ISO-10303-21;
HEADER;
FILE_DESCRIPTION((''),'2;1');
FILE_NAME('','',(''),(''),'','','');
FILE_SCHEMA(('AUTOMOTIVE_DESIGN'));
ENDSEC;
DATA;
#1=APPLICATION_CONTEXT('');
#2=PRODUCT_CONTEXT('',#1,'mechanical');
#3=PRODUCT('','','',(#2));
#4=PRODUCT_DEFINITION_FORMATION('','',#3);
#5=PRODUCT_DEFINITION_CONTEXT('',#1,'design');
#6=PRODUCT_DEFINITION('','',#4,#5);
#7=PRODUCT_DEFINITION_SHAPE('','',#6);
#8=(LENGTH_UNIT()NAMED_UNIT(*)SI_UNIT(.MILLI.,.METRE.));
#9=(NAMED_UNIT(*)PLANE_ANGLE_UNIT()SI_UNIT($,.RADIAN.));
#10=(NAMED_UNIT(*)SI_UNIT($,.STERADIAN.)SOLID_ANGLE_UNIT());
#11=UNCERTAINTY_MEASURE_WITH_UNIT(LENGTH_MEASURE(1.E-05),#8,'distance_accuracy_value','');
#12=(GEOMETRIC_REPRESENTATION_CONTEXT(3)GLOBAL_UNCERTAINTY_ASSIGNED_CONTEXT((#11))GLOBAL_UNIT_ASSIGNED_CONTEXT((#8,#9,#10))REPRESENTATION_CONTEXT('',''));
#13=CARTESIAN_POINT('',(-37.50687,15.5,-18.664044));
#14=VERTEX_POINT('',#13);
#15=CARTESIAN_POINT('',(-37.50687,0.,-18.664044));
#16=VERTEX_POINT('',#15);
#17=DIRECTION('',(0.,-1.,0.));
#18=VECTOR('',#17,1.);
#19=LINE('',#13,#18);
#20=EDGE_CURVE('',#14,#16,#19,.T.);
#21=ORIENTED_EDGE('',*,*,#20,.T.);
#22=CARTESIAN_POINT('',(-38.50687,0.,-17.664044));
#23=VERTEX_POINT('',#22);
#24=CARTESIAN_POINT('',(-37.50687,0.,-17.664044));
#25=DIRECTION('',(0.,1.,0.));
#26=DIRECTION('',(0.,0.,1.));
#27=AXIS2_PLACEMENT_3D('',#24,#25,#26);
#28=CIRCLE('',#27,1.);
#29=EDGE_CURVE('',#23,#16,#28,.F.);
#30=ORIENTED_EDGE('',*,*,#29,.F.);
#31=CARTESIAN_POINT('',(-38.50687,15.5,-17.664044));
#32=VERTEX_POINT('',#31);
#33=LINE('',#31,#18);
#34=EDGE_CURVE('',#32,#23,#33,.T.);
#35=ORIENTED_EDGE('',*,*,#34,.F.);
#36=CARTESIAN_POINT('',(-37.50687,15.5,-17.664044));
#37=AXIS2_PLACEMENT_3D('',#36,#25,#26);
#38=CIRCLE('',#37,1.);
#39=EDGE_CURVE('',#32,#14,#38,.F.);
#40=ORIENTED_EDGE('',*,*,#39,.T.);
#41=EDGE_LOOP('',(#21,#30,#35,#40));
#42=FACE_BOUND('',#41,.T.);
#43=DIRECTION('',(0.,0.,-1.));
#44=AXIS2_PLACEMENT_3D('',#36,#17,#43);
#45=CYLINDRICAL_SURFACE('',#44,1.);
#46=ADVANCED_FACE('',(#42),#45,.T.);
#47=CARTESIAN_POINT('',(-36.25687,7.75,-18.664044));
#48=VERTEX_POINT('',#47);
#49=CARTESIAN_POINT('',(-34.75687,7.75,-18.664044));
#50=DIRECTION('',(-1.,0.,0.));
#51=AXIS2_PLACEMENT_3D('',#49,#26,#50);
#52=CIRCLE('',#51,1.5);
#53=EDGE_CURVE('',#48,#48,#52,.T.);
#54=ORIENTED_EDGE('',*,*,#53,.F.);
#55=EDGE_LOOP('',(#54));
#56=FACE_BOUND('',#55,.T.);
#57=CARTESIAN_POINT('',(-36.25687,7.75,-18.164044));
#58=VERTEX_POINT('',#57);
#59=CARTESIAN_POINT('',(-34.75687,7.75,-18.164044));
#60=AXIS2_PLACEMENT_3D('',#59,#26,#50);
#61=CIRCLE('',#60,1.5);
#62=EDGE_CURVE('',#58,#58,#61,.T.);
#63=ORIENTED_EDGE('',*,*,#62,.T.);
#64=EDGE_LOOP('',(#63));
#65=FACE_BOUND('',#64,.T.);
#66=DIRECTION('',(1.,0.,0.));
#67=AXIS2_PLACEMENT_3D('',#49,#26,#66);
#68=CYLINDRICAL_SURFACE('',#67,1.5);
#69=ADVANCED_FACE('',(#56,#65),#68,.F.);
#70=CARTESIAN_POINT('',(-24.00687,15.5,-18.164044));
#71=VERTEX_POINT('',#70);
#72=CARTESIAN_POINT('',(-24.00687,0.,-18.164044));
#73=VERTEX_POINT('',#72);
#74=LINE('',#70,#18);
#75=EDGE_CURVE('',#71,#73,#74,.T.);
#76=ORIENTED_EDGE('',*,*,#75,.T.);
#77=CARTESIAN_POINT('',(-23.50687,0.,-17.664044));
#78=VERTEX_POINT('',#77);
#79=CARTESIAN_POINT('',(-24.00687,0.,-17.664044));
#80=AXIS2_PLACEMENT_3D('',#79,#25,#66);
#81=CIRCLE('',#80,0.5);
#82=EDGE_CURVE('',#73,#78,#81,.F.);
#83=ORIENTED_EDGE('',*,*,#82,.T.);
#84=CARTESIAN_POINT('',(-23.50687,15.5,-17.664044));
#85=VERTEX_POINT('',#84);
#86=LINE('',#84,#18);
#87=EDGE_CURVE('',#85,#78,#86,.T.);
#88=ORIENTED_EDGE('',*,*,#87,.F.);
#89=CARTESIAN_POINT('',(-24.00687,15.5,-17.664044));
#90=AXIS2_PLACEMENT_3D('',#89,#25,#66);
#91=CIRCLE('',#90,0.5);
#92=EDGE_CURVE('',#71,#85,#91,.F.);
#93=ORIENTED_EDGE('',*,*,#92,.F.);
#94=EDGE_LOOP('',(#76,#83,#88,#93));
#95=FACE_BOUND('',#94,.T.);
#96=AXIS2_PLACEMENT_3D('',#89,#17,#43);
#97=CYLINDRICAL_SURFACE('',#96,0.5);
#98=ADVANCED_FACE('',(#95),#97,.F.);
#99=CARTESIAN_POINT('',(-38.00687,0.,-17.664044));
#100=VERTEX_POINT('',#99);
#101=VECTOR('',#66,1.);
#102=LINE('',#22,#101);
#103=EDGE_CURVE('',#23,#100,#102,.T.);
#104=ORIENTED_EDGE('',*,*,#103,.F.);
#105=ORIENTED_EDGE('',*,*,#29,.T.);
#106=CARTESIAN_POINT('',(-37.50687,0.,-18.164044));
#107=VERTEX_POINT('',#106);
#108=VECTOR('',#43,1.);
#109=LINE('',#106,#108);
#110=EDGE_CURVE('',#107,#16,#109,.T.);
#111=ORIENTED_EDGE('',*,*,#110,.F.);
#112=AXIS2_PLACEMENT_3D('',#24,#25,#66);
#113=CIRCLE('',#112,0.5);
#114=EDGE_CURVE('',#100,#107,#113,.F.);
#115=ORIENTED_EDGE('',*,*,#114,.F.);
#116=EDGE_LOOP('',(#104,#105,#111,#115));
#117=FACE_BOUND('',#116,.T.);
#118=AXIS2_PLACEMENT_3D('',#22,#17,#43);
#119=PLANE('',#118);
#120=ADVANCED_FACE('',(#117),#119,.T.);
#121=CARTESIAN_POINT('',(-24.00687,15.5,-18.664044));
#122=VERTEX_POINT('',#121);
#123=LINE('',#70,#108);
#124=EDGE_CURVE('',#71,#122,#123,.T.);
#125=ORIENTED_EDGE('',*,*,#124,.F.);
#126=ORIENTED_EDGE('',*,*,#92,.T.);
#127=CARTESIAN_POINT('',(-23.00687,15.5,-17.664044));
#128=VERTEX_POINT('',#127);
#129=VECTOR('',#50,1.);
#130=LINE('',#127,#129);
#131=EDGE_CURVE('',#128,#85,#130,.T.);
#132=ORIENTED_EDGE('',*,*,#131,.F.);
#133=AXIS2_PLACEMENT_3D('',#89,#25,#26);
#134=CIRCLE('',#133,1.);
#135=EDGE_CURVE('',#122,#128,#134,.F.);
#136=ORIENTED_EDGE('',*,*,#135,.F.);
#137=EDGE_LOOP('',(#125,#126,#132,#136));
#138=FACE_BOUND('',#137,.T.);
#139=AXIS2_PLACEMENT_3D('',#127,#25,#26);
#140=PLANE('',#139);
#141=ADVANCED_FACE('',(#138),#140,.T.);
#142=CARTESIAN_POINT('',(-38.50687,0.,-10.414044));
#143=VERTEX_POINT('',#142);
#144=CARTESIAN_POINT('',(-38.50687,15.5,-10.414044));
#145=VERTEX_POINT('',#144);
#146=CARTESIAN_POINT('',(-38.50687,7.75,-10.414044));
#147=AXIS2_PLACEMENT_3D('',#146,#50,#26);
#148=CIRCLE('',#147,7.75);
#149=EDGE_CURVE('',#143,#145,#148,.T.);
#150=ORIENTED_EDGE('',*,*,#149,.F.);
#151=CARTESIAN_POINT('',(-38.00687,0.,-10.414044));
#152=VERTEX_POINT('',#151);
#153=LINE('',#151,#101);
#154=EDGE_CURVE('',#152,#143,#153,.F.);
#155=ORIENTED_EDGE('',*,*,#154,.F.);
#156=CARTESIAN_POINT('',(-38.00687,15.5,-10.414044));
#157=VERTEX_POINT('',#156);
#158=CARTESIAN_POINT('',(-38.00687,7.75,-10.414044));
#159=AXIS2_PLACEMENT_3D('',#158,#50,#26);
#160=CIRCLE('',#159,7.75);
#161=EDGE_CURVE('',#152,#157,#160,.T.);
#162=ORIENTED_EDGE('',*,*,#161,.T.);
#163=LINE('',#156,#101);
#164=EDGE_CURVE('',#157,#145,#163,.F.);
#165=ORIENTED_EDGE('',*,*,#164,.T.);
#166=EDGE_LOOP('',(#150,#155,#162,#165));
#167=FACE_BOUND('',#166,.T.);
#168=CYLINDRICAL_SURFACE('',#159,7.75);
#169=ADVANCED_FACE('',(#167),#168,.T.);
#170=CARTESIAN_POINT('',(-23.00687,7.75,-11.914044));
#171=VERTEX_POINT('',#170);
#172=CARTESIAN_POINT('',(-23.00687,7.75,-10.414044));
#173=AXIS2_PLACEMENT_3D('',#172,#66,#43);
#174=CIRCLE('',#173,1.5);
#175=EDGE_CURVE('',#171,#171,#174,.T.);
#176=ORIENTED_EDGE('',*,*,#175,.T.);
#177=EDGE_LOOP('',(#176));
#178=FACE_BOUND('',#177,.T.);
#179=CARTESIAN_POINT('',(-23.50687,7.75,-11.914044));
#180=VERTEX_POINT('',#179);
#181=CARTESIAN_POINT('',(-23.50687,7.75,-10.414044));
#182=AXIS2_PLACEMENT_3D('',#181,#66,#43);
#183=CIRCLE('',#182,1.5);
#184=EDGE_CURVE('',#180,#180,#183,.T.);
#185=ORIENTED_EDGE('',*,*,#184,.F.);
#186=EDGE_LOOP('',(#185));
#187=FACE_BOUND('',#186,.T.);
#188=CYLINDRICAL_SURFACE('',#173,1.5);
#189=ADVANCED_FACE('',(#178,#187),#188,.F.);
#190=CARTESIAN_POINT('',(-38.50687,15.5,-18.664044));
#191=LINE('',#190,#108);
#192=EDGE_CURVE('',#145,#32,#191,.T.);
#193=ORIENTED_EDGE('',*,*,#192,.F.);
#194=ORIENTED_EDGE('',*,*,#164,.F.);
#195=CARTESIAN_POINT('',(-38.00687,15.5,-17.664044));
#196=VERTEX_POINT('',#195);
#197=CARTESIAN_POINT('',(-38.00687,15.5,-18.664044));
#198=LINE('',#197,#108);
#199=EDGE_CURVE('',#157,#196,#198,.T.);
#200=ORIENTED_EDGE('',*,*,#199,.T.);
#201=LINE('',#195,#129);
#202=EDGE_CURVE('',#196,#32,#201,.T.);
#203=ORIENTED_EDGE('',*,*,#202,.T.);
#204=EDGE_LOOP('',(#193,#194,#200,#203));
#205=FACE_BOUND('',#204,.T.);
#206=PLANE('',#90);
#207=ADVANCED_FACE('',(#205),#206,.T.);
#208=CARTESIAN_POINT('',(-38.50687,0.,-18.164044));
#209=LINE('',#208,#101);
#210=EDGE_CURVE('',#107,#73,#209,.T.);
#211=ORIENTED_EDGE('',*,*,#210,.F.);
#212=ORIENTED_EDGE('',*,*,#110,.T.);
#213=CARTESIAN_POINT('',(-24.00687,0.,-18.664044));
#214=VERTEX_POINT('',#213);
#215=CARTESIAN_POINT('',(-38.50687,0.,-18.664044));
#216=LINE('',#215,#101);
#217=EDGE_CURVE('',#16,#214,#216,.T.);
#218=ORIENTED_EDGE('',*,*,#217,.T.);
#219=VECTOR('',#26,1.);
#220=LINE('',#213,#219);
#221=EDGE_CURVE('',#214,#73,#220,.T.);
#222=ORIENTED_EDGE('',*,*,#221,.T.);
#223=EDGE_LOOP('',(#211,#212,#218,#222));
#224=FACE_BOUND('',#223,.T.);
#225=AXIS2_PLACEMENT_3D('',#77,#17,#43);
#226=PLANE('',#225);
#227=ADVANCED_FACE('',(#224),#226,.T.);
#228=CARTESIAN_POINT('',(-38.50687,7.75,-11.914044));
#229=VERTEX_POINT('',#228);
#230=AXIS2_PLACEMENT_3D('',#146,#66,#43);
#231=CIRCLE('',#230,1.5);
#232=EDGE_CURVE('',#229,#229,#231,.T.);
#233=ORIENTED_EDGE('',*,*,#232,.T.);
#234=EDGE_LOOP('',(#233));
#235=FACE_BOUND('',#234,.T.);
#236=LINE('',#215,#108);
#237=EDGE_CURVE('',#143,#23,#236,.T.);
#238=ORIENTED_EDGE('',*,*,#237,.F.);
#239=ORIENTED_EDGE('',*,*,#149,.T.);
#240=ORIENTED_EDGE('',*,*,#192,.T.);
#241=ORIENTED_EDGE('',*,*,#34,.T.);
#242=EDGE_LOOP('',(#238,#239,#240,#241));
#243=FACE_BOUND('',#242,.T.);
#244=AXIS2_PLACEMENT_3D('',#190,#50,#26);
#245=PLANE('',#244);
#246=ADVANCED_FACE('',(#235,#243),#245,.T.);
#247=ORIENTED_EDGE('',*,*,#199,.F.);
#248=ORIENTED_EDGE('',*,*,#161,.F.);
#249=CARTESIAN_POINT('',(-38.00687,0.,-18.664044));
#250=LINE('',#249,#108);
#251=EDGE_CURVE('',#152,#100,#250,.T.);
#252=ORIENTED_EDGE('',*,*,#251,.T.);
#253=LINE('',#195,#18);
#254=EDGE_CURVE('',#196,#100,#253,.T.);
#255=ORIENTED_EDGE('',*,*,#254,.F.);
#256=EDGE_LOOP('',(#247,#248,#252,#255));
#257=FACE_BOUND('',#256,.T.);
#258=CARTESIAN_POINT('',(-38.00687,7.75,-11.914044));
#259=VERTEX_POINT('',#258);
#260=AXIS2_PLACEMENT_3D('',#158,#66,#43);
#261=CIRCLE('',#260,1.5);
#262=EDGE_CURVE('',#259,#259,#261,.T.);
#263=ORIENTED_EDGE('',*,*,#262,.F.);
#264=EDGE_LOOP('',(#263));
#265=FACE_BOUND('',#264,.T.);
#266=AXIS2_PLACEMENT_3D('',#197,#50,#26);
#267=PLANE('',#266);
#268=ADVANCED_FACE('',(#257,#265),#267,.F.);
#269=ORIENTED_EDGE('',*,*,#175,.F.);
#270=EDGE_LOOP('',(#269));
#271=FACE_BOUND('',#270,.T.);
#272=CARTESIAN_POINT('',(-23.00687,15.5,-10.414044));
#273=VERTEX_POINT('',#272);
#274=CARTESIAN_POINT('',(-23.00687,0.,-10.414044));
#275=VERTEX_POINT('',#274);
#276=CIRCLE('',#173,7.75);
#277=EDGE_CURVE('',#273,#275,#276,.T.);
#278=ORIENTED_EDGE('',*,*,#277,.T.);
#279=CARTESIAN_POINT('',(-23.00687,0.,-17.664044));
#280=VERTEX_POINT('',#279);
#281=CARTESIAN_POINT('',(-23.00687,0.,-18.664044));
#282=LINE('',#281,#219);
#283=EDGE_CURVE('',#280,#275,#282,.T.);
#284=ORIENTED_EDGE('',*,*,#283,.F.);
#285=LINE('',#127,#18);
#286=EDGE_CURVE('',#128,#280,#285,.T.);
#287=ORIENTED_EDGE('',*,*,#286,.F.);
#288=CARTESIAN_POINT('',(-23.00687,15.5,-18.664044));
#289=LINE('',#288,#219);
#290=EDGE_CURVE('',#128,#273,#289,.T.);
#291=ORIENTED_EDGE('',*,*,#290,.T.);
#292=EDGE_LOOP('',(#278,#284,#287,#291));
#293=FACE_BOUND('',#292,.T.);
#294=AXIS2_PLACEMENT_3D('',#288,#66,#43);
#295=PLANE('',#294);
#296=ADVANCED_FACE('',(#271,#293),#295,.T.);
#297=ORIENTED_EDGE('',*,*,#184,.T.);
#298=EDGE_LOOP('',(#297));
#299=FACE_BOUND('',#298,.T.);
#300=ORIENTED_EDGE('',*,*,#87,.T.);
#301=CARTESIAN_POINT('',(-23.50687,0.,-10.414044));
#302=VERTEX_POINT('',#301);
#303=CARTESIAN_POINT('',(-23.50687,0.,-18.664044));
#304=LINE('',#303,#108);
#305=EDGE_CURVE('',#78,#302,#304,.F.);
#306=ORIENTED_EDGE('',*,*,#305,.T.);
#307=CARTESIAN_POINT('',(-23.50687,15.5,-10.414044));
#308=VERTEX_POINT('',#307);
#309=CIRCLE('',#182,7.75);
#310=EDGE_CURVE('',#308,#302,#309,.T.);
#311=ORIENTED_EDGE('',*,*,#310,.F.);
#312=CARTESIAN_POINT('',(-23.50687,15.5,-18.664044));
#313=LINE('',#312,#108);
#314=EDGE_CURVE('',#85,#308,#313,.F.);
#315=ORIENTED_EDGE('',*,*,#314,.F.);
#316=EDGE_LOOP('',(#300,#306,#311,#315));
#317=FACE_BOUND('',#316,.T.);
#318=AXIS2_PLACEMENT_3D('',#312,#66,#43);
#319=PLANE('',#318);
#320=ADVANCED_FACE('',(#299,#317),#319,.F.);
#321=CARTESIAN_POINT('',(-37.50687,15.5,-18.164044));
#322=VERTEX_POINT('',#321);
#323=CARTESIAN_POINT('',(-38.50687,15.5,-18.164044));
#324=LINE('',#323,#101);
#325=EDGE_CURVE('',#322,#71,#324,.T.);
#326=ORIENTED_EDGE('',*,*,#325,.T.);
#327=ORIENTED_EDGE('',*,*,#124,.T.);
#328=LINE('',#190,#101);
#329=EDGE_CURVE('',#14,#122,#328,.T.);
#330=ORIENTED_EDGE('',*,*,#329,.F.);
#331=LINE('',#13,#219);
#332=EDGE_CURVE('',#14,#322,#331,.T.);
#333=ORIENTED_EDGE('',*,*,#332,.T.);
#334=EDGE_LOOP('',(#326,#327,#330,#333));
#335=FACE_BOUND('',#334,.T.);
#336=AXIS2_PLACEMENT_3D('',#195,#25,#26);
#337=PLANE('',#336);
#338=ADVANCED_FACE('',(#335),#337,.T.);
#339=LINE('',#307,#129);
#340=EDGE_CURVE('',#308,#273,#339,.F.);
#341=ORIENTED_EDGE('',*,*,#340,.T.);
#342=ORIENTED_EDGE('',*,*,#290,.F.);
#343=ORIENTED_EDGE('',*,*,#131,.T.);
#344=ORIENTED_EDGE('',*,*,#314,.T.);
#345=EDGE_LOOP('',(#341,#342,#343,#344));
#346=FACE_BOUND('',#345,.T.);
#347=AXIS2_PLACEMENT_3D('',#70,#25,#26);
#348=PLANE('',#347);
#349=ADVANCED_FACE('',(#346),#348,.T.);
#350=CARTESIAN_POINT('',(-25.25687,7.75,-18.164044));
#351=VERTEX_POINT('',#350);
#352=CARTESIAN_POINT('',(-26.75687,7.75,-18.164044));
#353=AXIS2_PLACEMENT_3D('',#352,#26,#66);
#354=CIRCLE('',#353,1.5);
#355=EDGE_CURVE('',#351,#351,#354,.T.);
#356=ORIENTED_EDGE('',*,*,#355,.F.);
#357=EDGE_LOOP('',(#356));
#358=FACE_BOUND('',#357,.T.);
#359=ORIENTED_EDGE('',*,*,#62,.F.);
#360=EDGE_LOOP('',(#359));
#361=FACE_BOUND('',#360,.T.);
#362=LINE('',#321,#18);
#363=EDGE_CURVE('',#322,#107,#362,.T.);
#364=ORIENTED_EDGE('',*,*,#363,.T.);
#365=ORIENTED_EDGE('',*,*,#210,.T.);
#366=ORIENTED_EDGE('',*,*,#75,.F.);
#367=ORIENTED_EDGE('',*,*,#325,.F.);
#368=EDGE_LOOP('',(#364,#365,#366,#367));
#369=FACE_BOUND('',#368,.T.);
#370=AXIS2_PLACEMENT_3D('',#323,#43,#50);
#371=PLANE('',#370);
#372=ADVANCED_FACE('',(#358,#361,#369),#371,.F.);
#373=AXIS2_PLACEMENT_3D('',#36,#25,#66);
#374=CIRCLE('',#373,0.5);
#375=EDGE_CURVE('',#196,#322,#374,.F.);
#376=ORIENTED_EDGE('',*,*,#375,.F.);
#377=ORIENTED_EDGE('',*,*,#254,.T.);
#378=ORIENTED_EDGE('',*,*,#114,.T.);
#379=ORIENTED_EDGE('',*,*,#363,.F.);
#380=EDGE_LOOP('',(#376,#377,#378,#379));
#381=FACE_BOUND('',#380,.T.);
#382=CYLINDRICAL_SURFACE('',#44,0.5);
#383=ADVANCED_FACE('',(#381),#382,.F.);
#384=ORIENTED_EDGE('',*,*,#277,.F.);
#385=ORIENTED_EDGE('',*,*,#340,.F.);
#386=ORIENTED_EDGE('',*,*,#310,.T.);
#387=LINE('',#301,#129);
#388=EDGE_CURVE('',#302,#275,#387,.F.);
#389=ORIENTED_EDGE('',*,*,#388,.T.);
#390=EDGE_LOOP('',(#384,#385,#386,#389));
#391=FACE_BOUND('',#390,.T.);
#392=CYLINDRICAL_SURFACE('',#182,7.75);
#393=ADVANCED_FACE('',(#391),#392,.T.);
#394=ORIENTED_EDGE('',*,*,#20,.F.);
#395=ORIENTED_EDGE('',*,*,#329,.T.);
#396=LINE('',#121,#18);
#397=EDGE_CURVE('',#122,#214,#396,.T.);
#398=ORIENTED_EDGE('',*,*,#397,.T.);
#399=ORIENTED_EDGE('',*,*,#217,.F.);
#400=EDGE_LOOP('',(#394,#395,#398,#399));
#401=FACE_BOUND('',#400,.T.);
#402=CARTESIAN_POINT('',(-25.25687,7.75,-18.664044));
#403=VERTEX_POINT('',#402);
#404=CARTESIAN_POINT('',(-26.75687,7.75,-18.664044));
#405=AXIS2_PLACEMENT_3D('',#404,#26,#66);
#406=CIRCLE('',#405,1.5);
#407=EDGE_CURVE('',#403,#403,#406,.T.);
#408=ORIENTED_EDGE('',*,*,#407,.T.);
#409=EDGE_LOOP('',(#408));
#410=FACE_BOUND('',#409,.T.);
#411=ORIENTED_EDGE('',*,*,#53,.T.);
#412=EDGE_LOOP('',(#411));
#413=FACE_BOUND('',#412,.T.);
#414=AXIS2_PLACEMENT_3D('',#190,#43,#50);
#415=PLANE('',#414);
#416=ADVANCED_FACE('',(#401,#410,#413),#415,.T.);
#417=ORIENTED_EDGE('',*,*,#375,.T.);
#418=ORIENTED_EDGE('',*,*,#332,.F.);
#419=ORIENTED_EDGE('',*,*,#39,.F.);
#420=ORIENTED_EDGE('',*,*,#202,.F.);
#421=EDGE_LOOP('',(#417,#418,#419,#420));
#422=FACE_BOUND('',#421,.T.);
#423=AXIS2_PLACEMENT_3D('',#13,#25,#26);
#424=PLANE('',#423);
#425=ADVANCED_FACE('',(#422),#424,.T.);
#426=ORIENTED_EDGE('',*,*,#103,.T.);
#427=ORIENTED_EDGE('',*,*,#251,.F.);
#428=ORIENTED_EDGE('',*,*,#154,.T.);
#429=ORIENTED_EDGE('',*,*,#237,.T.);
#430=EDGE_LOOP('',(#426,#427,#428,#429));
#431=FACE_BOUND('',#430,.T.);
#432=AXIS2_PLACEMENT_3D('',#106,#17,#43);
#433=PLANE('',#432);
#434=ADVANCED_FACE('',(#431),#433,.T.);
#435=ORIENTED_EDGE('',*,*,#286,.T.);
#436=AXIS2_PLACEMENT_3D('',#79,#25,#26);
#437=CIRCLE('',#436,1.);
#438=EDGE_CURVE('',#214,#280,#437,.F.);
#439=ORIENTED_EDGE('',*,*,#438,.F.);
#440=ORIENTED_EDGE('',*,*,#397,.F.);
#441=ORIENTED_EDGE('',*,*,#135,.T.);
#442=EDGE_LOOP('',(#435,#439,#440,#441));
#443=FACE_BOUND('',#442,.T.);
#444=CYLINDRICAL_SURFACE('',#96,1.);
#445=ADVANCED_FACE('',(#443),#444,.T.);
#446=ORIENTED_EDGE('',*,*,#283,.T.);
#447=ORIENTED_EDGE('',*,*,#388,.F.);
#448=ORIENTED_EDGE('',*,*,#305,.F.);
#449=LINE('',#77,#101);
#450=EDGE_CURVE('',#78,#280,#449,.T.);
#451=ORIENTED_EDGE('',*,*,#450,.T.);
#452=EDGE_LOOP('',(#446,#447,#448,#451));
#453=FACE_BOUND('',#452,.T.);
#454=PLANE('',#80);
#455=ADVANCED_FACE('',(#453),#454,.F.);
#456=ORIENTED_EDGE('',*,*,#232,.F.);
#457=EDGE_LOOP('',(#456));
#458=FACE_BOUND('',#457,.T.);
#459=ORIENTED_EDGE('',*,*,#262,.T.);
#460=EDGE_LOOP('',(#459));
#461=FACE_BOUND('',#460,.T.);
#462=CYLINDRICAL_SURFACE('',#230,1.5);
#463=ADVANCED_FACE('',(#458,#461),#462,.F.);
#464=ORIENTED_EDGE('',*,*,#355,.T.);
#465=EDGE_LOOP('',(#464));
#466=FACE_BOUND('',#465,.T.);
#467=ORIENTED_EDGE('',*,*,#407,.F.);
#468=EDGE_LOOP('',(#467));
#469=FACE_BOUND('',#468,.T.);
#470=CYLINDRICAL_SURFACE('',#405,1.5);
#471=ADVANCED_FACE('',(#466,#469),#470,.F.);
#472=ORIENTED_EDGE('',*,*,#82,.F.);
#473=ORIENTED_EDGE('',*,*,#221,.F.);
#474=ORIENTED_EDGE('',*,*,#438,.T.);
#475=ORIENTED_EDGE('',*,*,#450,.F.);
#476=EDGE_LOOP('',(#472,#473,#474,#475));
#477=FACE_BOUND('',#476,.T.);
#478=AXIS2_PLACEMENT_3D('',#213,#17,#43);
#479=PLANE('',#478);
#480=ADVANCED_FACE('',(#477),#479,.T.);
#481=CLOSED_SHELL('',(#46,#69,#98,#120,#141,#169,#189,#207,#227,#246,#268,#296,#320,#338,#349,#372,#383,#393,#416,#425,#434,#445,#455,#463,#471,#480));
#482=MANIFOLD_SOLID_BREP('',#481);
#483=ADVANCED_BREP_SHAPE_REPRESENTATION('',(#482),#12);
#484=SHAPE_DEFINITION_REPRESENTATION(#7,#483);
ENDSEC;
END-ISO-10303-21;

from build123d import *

# Parameters (mm, degrees)
BRIDA_BASE1_DEPTH     = 15.5
CROQUIS5_R            = 1.5
CORTAR_EXTRUIR1_DEPTH = 29.789695
CROQUIS6_R            = 1.5
CORTAR_EXTRUIR2_DEPTH = 0.5


# Sheet-metal steps are written as plain solids
with BuildPart() as part:
    # Croquis1 → Brida base1 (new body)
    with BuildSketch(Plane(origin=(0, 0, 0), x_dir=(1, 0, 0), z_dir=(0, 1, 0))):
        with BuildLine():
            Line((-23.006869712, 2.664043993), (-23.006869712, 17.664043993))
            ThreePointArc((-23.006869712, 17.664043993), (-23.299762931, 18.371150774), (-24.006869712, 18.664043993))
            Line((-24.006869712, 18.664043993), (-37.506869712, 18.664043993))
            ThreePointArc((-37.506869712, 18.664043993), (-38.213976494, 18.371150774), (-38.506869712, 17.664043993))
            Line((-38.506869712, 17.664043993), (-38.506869712, 2.664043993))
            Line((-38.506869712, 2.664043993), (-38.006869712, 2.664043993))
            Line((-38.006869712, 2.664043993), (-38.006869712, 17.664043993))
            ThreePointArc((-38.006869712, 17.664043993), (-37.860423103, 18.017597384), (-37.506869712, 18.164043993))
            Line((-37.506869712, 18.164043993), (-24.006869712, 18.164043993))
            ThreePointArc((-24.006869712, 18.164043993), (-23.653316322, 18.017597384), (-23.506869712, 17.664043993))
            Line((-23.506869712, 17.664043993), (-23.506869712, 2.664043993))
            Line((-23.506869712, 2.664043993), (-23.006869712, 2.664043993))
        make_face()
    extrude(amount=BRIDA_BASE1_DEPTH)

    # Croquis5 → Cortar-Extruir1 (cut, through all)
    with BuildSketch(Plane(origin=(-23.006869712, 0, 0), x_dir=(0, 0, -1), z_dir=(1, 0, 0))):
        with BuildLine():
            ThreePointArc((2.664043993, 7.75), (4.933966439, 13.230077554), (10.414043993, 15.5))
            Line((10.414043993, 15.5), (2.664043993, 15.5))
            Line((2.664043993, 15.5), (2.664043993, 7.75))
        make_face()
        with BuildLine():
            ThreePointArc((10.414043993, 0), (4.933966439, 2.269922446), (2.664043993, 7.75))
            Line((2.664043993, 7.75), (2.664043993, 0))
            Line((2.664043993, 0), (10.414043993, 0))
        make_face()
        with Locations((10.414043993, 7.75)):
            Circle(CROQUIS5_R)
    extrude(amount=-CORTAR_EXTRUIR1_DEPTH, mode=Mode.SUBTRACT)

    # Croquis6 → Cortar-Extruir2 (cut)
    with BuildSketch(Plane.XY.offset(-18.164043993)):
        with Locations((-26.756869712, 7.75)):
            Circle(CROQUIS6_R)
        with Locations(Location((-34.756869712, 7.75, 0), (0, 0, 180))):
            Circle(CROQUIS6_R)
    extrude(amount=-CORTAR_EXTRUIR2_DEPTH, mode=Mode.SUBTRACT)


solid = part.part
